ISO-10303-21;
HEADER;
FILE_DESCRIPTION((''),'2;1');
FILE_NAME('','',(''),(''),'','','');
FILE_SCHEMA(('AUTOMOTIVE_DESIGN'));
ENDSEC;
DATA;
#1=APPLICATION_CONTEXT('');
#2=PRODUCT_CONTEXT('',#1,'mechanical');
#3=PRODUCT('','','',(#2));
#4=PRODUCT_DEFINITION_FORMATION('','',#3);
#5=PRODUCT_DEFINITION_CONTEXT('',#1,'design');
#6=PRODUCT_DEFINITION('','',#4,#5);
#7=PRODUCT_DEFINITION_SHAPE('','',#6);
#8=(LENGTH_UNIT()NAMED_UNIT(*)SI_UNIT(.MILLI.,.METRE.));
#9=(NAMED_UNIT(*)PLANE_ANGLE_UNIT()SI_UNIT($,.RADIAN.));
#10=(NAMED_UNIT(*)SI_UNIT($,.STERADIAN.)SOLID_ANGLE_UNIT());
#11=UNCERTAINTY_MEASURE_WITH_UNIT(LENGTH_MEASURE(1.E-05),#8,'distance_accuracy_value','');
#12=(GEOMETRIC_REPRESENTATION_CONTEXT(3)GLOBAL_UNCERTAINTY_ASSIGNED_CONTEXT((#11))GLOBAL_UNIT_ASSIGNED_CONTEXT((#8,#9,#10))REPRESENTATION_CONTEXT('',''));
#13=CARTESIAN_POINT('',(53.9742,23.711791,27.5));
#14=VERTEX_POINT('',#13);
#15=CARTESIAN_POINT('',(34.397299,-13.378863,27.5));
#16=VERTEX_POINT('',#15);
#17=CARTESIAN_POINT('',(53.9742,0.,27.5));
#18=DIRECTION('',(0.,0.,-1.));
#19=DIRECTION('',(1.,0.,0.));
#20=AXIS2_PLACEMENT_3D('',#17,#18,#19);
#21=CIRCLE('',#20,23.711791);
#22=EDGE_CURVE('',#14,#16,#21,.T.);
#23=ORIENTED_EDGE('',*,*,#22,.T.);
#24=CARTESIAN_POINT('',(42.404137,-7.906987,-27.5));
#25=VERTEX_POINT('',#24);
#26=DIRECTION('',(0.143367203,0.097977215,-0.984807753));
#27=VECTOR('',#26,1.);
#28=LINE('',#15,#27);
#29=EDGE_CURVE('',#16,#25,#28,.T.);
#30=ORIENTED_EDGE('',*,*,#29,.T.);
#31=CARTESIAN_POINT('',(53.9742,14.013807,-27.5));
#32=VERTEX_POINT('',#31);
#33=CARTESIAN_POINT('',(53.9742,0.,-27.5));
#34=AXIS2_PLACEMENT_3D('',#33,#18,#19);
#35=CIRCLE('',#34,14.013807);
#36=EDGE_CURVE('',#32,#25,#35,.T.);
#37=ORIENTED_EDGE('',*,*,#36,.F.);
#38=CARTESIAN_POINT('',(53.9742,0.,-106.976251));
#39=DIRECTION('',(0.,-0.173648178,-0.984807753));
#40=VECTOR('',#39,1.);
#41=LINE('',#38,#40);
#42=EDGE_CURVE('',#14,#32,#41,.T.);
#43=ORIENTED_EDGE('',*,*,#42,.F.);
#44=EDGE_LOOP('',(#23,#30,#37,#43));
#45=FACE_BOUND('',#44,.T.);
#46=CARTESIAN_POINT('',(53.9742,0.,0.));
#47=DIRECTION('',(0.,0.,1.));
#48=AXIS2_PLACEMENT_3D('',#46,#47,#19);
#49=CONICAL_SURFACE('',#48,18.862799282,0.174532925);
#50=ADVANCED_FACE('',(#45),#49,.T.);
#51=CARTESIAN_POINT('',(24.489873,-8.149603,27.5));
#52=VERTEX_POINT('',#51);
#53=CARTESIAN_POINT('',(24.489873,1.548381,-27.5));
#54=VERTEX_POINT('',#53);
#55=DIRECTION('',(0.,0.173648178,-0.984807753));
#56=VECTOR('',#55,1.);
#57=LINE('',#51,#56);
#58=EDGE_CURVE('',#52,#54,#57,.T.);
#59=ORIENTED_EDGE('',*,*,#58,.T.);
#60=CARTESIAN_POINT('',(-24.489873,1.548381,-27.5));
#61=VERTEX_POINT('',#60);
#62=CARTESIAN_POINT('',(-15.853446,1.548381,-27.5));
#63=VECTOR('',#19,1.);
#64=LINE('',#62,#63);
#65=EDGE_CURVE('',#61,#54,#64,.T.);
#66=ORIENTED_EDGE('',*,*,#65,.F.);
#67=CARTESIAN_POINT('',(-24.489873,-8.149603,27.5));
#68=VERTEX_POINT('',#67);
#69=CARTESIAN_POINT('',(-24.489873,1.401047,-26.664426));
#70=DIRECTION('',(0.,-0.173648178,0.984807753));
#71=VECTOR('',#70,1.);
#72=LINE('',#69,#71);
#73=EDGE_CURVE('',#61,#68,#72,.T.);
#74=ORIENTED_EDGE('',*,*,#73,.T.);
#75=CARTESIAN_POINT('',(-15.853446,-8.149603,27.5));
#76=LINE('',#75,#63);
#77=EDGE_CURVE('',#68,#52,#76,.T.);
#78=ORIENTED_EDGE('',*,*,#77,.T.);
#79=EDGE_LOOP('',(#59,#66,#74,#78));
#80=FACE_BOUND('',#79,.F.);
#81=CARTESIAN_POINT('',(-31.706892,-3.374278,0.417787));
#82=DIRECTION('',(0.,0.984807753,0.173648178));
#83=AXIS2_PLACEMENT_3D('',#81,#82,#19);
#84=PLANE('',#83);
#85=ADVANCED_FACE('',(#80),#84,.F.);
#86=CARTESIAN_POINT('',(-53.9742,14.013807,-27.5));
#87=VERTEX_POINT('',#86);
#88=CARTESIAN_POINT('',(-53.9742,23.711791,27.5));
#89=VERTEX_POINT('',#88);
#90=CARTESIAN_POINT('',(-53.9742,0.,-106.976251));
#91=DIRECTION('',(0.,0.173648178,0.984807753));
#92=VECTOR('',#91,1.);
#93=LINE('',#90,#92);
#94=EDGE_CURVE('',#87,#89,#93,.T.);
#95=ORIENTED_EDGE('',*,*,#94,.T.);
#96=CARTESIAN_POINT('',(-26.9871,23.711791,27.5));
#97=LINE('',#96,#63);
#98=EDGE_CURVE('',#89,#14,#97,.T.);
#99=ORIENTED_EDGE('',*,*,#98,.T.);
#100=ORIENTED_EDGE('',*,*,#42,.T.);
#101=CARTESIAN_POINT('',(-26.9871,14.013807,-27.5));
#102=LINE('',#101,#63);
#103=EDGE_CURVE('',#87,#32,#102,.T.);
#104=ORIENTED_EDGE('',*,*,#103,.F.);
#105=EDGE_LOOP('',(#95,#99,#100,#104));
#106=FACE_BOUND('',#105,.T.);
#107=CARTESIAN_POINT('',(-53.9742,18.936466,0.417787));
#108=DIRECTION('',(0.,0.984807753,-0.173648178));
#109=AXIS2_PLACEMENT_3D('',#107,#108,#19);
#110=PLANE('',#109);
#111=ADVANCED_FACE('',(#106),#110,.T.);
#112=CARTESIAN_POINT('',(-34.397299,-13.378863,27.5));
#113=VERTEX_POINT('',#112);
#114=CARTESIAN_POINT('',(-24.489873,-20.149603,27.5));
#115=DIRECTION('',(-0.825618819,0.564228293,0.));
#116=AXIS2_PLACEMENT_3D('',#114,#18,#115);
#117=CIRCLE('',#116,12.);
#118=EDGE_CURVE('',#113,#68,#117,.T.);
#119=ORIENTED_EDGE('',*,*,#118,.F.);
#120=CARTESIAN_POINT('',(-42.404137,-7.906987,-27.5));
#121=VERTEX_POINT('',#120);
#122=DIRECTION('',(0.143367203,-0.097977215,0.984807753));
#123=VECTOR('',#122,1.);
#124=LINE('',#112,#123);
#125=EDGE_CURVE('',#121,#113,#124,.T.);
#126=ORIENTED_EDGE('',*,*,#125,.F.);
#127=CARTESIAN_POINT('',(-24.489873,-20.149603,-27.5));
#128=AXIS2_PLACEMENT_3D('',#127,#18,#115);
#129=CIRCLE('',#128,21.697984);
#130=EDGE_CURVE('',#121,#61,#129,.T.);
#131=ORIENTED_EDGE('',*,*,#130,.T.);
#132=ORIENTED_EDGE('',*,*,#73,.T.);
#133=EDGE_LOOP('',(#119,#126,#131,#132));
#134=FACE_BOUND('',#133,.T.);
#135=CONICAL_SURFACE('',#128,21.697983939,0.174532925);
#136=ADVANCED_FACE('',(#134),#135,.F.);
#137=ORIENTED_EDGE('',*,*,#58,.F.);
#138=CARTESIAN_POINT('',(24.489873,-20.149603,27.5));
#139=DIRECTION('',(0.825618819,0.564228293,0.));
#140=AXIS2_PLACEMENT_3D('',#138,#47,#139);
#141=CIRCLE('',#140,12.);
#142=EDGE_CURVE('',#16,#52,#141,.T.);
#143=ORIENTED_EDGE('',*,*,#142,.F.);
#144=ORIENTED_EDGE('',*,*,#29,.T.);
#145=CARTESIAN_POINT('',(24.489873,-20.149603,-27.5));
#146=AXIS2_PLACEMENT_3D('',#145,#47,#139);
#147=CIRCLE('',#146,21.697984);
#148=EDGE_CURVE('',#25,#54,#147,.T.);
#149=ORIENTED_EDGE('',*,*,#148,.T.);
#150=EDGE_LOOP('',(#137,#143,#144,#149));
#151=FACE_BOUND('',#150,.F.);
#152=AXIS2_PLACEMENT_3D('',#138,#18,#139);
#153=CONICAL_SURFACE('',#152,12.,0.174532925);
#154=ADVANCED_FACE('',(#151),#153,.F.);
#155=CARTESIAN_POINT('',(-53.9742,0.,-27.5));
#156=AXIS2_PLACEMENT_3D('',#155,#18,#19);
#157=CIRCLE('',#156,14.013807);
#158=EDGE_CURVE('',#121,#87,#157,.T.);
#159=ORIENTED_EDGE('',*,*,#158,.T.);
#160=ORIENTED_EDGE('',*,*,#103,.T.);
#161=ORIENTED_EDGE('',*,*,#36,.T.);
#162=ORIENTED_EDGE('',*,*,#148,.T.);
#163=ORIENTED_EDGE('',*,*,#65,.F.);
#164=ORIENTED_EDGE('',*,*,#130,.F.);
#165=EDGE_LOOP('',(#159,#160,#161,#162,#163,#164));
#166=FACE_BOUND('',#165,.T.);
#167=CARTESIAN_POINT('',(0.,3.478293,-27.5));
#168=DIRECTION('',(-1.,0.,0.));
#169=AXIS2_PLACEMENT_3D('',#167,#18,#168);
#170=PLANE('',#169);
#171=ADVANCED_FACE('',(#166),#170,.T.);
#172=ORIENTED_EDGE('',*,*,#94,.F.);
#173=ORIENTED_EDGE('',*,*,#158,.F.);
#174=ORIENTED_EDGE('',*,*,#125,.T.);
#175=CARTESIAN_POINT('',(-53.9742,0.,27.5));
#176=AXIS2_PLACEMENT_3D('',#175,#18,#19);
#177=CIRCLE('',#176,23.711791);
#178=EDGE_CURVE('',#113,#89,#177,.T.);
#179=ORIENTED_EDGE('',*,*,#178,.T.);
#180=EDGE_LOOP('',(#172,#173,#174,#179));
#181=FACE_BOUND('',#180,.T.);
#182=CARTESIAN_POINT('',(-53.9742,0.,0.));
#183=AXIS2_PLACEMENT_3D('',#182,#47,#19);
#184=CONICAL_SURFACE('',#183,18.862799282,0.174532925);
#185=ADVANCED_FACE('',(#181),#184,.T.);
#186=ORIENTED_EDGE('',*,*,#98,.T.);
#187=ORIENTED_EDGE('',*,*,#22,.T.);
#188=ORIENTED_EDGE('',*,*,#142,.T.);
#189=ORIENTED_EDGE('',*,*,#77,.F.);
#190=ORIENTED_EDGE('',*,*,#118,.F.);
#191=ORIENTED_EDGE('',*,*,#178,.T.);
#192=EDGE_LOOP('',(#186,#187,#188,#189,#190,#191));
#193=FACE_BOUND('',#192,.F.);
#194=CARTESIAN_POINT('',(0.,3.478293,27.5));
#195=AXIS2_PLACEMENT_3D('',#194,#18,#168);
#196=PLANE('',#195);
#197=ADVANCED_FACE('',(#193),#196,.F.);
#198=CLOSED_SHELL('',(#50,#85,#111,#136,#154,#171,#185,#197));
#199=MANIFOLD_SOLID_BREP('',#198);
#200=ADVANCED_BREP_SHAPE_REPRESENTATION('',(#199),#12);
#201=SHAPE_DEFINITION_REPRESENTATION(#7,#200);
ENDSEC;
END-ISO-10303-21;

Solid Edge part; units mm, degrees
sketch "Sketch1" plane through (0, 0, 0) normal (0, 0, 1) x (1, 0, 0)
  line L0 (-53.9742, 23.7118) -> (53.9742, 23.7118)
  line L1 (-31.7069, -8.1496) -> (31.7069, -8.1496)
  arc A0 (-31.7069, -8.1496) -> (-53.9742, 23.7118) centre (-53.9742, 0) cw
  arc A1 (53.9742, 23.7118) -> (31.7069, -8.1496) centre (53.9742, 0) cw
extrude "Protrusion1" add sketch "Sketch1" along normal mid plane 55
fillet "Round_1" radius 12 2 edges at (-31.7069, -8.1496, 0) (31.7069, -8.1496, 0)
draft "Draft1" angle 10 neutral plane through (0, 0, 27.5) normal (0, 0, 1) pull direction (0, 0, -1) face at (-37.0623, 23.7118, 17.7833) face at (-16.8164, -8.1496, 17.7833) face at (-46.3591, -22.4557, 17.7833) face at (-33.2565, -11.9553, -17.7833) face at (68.2174, 18.9573, 17.7833) face at (33.2565, -11.9553, 17.7833)
